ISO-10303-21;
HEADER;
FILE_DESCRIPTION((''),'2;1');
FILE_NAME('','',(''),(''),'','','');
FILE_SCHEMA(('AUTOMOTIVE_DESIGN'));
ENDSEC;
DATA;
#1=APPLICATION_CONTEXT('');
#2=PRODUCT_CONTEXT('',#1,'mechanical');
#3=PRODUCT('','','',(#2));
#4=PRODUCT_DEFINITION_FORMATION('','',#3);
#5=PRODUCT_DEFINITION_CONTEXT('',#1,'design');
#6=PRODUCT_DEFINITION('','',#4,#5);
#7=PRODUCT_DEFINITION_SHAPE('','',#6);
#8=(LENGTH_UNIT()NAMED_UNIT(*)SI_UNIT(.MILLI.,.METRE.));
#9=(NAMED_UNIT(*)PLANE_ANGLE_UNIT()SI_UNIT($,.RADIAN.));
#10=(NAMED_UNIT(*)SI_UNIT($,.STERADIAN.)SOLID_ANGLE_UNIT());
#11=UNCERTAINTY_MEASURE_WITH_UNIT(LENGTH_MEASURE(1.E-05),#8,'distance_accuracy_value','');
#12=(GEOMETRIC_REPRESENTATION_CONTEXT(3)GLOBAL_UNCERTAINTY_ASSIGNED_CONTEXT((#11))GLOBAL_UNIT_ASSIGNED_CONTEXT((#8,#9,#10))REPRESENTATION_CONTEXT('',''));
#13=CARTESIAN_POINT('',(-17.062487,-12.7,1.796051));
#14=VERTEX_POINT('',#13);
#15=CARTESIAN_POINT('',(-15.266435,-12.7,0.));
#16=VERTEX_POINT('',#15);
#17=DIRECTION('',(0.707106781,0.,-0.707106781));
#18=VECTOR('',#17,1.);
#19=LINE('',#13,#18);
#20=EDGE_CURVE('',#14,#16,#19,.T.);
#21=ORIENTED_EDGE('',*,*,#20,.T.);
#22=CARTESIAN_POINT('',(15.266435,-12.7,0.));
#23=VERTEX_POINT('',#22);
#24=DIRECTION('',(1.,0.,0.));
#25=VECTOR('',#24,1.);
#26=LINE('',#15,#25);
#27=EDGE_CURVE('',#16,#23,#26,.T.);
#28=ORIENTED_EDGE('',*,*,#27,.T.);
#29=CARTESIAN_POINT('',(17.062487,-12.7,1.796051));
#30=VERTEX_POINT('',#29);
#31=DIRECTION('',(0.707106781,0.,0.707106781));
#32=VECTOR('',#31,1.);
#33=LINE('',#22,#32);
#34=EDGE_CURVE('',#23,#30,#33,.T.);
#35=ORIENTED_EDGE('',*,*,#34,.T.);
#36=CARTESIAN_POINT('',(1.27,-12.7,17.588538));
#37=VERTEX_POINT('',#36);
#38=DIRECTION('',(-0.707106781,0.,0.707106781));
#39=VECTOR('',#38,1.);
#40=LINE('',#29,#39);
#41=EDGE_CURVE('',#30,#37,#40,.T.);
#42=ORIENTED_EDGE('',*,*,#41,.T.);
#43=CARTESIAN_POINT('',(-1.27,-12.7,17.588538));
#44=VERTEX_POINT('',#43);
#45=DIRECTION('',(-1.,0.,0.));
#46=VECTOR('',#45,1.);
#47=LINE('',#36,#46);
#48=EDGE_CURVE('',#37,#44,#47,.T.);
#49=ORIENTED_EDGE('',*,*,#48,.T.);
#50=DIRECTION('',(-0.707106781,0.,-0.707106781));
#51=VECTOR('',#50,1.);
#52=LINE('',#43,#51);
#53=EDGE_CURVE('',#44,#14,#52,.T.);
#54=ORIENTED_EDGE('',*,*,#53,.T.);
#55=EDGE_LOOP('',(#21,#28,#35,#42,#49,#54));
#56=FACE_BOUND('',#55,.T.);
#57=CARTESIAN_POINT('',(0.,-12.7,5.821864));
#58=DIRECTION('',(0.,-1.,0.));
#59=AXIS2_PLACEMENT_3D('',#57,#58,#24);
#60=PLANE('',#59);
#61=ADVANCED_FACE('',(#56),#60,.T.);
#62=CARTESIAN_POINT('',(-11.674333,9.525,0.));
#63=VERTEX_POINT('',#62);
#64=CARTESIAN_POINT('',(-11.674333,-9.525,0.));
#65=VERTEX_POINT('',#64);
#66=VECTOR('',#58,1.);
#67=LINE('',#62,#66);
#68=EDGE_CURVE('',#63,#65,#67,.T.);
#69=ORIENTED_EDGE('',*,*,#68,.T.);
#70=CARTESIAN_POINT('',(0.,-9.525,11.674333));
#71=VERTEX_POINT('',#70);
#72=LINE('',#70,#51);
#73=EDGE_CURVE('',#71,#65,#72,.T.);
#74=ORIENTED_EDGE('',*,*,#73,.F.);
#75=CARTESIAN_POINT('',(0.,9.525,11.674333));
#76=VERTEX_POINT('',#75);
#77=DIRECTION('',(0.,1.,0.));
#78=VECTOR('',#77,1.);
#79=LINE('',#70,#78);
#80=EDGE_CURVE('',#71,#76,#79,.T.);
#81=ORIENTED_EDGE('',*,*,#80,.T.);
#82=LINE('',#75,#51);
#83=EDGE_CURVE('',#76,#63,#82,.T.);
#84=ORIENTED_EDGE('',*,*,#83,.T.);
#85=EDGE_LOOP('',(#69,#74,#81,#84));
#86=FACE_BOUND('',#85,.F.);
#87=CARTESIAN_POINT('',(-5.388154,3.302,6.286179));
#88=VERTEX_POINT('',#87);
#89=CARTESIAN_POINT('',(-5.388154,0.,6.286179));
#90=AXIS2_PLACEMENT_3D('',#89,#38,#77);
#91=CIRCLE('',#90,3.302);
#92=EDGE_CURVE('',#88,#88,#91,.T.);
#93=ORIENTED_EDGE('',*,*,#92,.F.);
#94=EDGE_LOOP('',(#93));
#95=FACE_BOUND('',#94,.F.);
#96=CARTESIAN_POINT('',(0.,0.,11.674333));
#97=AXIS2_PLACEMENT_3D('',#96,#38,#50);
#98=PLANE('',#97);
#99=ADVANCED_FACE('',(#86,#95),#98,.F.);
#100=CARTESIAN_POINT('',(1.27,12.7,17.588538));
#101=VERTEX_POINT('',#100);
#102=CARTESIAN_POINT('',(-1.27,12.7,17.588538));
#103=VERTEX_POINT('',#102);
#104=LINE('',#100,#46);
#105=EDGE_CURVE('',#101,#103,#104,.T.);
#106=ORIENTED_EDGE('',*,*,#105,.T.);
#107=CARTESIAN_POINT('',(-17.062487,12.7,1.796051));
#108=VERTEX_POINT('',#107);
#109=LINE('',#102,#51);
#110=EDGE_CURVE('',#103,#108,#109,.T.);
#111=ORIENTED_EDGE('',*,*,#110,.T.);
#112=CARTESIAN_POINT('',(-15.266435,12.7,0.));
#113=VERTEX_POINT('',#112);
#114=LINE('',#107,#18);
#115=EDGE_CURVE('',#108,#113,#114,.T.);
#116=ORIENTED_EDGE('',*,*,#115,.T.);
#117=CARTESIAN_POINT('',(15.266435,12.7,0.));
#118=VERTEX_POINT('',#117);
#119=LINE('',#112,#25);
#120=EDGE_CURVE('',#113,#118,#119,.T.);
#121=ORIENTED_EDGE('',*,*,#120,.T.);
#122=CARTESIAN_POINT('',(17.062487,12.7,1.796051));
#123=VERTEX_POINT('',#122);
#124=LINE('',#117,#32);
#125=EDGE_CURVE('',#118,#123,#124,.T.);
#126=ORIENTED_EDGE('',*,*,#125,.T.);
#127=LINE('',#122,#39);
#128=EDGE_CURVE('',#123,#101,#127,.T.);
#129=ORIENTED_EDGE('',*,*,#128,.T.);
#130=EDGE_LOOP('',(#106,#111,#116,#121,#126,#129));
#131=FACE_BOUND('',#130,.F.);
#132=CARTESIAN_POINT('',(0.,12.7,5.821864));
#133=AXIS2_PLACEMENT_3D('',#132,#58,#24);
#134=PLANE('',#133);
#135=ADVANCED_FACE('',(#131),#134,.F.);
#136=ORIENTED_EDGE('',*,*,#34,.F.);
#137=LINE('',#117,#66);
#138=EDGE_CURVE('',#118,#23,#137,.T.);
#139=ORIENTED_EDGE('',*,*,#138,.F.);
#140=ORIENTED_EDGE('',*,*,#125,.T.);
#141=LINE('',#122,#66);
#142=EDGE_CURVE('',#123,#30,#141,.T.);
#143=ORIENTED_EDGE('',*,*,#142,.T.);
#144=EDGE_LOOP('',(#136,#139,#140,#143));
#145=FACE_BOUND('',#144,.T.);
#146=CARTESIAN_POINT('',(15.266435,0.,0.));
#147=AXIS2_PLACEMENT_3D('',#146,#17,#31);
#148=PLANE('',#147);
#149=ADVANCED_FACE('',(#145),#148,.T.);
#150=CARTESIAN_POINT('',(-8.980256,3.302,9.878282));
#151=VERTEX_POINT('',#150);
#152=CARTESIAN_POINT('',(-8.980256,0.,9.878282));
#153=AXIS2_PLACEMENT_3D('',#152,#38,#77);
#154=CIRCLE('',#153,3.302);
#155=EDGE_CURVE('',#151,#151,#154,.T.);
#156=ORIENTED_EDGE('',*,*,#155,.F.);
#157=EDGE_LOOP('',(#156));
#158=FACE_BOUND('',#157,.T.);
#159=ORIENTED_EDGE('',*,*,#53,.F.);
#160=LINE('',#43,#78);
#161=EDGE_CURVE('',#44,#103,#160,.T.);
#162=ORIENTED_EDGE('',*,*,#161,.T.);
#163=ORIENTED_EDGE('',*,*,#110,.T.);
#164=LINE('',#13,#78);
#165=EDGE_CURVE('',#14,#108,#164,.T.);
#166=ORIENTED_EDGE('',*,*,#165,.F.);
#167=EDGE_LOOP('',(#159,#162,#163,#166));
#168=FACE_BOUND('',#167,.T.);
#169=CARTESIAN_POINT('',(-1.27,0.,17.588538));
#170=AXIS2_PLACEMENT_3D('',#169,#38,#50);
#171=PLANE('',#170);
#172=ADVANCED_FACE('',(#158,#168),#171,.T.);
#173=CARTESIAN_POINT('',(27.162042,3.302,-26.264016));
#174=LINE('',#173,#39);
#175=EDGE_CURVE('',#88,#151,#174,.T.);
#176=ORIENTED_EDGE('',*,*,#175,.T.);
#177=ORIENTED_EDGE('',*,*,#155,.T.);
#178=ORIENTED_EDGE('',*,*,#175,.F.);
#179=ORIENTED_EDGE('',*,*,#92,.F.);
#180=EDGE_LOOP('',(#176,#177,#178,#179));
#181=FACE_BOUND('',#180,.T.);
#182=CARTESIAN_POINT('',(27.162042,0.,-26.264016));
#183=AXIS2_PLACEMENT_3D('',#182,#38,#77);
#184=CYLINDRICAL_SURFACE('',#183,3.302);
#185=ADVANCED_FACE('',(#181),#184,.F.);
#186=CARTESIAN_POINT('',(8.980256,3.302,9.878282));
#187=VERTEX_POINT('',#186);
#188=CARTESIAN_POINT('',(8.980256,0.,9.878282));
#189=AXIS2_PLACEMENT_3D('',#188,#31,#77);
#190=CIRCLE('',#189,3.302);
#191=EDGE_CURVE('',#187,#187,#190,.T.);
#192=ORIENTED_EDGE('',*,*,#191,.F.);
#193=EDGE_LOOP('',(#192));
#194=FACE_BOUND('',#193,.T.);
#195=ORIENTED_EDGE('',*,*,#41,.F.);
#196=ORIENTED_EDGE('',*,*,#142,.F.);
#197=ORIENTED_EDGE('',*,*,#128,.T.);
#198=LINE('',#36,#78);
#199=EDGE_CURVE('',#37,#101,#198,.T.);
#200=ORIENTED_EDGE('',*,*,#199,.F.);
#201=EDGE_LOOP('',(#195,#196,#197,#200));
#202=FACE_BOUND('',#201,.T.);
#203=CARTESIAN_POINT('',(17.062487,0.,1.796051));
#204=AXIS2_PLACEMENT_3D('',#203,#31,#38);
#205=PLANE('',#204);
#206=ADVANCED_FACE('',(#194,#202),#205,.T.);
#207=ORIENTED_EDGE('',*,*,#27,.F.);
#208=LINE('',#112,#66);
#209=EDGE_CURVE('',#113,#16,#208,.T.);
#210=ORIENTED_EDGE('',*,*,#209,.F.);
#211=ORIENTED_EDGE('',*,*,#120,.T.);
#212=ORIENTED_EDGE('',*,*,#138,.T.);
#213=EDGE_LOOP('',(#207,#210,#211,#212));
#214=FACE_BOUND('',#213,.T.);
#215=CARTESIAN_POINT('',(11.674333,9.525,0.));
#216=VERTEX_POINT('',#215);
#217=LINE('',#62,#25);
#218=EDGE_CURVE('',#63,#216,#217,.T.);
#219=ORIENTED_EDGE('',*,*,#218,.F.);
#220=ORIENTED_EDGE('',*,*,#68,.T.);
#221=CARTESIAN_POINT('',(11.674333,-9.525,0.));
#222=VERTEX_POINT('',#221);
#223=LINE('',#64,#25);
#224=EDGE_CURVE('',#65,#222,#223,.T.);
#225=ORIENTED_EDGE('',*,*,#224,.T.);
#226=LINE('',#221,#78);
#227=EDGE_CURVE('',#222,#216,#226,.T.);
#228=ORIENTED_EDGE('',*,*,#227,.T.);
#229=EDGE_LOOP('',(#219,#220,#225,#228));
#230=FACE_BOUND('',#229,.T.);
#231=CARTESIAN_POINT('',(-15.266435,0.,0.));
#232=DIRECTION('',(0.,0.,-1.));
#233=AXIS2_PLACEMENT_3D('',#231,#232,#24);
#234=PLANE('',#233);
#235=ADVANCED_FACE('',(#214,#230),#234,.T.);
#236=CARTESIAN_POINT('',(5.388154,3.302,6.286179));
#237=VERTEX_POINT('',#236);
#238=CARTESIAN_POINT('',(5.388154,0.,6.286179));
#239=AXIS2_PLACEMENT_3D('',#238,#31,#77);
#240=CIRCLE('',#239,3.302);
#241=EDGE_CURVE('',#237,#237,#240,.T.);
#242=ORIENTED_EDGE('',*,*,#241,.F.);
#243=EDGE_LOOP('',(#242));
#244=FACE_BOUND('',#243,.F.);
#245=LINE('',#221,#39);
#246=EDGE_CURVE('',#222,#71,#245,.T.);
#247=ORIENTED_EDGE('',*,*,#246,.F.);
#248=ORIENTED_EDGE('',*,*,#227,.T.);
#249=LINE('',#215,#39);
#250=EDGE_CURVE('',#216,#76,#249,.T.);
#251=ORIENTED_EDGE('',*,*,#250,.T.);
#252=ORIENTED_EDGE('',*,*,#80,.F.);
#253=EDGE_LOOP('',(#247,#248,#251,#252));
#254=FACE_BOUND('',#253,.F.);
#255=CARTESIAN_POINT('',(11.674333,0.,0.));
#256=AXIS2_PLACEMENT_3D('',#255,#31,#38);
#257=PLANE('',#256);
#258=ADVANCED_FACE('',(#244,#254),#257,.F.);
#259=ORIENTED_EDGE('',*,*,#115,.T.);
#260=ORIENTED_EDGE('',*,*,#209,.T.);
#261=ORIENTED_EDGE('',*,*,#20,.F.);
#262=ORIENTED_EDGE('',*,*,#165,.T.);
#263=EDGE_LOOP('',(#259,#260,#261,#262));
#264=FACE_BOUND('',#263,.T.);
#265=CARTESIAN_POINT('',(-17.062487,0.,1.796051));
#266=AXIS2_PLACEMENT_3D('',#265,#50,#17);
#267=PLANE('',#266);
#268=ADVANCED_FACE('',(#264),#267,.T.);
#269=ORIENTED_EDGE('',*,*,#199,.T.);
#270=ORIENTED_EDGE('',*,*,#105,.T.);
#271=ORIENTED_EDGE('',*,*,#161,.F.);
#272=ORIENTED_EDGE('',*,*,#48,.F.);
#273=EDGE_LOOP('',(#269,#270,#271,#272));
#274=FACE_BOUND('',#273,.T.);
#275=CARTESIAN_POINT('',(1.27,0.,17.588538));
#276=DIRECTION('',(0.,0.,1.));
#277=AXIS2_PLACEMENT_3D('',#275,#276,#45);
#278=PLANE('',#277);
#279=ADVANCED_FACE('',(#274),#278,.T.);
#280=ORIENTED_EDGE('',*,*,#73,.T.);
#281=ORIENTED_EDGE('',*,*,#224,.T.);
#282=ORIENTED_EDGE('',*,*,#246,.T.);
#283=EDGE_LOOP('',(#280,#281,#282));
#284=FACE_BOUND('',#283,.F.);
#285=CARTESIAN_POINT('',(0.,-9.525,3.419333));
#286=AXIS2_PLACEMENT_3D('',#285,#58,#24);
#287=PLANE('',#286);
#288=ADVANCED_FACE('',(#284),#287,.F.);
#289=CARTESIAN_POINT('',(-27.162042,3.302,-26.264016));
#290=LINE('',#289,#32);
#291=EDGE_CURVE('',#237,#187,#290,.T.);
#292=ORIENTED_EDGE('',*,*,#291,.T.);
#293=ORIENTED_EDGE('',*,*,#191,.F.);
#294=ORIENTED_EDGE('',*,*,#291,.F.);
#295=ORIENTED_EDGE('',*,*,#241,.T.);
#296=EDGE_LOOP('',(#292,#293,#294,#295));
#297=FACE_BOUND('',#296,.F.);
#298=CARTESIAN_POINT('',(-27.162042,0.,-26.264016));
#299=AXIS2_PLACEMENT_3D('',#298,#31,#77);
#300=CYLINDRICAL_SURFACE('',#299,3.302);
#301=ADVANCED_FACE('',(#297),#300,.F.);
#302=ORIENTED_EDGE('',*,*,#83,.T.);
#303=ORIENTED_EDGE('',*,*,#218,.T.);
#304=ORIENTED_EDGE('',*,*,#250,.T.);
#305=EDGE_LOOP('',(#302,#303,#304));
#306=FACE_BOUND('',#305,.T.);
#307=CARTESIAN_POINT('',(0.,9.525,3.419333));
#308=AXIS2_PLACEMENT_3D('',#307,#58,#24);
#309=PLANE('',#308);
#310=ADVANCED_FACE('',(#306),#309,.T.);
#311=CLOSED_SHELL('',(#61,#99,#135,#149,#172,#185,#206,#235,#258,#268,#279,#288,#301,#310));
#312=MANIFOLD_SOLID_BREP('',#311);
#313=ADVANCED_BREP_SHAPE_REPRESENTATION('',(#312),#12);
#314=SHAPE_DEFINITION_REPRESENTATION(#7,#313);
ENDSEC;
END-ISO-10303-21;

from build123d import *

# Parameters (mm, degrees)
F1_DEPTH = 12.7
F3_DEPTH = 9.525
F5_D     = 6.604


# Not quite as in the source:
# - a pattern or mirror of a feature is missing from the dataset's text; its kind, count and spacing are read off the source's solid


with BuildPart() as f1:
    # F0 (on Front) → F1 (new body, symmetric)
    with BuildSketch(Plane.XZ):
        Polygon((-17.06248663, 1.7960512242), (-15.2664354058, 0), (15.2664354058, 0), (17.06248663, 1.7960512242), (1.27, 17.5885378542), (-1.27, 17.5885378542), align=None)
    extrude(amount=F1_DEPTH, both=True)

    # F2 (on Front) → F3 (cut, symmetric)
    with BuildSketch(Plane.XZ):
        Polygon((0, 11.6743329574), (-11.6743329574, 0), (11.6743329574, 0), align=None)
    extrude(amount=F3_DEPTH, both=True, mode=Mode.SUBTRACT)

    # F5 (through all)
    with Locations(Plane(origin=(5.8371664787, 0, 5.8371664787), x_dir=(0, -1, 0), z_dir=(-0.7071067812, 0, -0.7071067812))):
        with Locations((0, 0.635)):
            f5 = Hole(F5_D / 2)

    # F5_copies: F5 across plane
    add(f5.mirror(Plane(origin=(0, 0, 0), x_dir=(0, 0, -1), z_dir=(-1, 0, 0))), mode=Mode.SUBTRACT)


solid = f1.part
